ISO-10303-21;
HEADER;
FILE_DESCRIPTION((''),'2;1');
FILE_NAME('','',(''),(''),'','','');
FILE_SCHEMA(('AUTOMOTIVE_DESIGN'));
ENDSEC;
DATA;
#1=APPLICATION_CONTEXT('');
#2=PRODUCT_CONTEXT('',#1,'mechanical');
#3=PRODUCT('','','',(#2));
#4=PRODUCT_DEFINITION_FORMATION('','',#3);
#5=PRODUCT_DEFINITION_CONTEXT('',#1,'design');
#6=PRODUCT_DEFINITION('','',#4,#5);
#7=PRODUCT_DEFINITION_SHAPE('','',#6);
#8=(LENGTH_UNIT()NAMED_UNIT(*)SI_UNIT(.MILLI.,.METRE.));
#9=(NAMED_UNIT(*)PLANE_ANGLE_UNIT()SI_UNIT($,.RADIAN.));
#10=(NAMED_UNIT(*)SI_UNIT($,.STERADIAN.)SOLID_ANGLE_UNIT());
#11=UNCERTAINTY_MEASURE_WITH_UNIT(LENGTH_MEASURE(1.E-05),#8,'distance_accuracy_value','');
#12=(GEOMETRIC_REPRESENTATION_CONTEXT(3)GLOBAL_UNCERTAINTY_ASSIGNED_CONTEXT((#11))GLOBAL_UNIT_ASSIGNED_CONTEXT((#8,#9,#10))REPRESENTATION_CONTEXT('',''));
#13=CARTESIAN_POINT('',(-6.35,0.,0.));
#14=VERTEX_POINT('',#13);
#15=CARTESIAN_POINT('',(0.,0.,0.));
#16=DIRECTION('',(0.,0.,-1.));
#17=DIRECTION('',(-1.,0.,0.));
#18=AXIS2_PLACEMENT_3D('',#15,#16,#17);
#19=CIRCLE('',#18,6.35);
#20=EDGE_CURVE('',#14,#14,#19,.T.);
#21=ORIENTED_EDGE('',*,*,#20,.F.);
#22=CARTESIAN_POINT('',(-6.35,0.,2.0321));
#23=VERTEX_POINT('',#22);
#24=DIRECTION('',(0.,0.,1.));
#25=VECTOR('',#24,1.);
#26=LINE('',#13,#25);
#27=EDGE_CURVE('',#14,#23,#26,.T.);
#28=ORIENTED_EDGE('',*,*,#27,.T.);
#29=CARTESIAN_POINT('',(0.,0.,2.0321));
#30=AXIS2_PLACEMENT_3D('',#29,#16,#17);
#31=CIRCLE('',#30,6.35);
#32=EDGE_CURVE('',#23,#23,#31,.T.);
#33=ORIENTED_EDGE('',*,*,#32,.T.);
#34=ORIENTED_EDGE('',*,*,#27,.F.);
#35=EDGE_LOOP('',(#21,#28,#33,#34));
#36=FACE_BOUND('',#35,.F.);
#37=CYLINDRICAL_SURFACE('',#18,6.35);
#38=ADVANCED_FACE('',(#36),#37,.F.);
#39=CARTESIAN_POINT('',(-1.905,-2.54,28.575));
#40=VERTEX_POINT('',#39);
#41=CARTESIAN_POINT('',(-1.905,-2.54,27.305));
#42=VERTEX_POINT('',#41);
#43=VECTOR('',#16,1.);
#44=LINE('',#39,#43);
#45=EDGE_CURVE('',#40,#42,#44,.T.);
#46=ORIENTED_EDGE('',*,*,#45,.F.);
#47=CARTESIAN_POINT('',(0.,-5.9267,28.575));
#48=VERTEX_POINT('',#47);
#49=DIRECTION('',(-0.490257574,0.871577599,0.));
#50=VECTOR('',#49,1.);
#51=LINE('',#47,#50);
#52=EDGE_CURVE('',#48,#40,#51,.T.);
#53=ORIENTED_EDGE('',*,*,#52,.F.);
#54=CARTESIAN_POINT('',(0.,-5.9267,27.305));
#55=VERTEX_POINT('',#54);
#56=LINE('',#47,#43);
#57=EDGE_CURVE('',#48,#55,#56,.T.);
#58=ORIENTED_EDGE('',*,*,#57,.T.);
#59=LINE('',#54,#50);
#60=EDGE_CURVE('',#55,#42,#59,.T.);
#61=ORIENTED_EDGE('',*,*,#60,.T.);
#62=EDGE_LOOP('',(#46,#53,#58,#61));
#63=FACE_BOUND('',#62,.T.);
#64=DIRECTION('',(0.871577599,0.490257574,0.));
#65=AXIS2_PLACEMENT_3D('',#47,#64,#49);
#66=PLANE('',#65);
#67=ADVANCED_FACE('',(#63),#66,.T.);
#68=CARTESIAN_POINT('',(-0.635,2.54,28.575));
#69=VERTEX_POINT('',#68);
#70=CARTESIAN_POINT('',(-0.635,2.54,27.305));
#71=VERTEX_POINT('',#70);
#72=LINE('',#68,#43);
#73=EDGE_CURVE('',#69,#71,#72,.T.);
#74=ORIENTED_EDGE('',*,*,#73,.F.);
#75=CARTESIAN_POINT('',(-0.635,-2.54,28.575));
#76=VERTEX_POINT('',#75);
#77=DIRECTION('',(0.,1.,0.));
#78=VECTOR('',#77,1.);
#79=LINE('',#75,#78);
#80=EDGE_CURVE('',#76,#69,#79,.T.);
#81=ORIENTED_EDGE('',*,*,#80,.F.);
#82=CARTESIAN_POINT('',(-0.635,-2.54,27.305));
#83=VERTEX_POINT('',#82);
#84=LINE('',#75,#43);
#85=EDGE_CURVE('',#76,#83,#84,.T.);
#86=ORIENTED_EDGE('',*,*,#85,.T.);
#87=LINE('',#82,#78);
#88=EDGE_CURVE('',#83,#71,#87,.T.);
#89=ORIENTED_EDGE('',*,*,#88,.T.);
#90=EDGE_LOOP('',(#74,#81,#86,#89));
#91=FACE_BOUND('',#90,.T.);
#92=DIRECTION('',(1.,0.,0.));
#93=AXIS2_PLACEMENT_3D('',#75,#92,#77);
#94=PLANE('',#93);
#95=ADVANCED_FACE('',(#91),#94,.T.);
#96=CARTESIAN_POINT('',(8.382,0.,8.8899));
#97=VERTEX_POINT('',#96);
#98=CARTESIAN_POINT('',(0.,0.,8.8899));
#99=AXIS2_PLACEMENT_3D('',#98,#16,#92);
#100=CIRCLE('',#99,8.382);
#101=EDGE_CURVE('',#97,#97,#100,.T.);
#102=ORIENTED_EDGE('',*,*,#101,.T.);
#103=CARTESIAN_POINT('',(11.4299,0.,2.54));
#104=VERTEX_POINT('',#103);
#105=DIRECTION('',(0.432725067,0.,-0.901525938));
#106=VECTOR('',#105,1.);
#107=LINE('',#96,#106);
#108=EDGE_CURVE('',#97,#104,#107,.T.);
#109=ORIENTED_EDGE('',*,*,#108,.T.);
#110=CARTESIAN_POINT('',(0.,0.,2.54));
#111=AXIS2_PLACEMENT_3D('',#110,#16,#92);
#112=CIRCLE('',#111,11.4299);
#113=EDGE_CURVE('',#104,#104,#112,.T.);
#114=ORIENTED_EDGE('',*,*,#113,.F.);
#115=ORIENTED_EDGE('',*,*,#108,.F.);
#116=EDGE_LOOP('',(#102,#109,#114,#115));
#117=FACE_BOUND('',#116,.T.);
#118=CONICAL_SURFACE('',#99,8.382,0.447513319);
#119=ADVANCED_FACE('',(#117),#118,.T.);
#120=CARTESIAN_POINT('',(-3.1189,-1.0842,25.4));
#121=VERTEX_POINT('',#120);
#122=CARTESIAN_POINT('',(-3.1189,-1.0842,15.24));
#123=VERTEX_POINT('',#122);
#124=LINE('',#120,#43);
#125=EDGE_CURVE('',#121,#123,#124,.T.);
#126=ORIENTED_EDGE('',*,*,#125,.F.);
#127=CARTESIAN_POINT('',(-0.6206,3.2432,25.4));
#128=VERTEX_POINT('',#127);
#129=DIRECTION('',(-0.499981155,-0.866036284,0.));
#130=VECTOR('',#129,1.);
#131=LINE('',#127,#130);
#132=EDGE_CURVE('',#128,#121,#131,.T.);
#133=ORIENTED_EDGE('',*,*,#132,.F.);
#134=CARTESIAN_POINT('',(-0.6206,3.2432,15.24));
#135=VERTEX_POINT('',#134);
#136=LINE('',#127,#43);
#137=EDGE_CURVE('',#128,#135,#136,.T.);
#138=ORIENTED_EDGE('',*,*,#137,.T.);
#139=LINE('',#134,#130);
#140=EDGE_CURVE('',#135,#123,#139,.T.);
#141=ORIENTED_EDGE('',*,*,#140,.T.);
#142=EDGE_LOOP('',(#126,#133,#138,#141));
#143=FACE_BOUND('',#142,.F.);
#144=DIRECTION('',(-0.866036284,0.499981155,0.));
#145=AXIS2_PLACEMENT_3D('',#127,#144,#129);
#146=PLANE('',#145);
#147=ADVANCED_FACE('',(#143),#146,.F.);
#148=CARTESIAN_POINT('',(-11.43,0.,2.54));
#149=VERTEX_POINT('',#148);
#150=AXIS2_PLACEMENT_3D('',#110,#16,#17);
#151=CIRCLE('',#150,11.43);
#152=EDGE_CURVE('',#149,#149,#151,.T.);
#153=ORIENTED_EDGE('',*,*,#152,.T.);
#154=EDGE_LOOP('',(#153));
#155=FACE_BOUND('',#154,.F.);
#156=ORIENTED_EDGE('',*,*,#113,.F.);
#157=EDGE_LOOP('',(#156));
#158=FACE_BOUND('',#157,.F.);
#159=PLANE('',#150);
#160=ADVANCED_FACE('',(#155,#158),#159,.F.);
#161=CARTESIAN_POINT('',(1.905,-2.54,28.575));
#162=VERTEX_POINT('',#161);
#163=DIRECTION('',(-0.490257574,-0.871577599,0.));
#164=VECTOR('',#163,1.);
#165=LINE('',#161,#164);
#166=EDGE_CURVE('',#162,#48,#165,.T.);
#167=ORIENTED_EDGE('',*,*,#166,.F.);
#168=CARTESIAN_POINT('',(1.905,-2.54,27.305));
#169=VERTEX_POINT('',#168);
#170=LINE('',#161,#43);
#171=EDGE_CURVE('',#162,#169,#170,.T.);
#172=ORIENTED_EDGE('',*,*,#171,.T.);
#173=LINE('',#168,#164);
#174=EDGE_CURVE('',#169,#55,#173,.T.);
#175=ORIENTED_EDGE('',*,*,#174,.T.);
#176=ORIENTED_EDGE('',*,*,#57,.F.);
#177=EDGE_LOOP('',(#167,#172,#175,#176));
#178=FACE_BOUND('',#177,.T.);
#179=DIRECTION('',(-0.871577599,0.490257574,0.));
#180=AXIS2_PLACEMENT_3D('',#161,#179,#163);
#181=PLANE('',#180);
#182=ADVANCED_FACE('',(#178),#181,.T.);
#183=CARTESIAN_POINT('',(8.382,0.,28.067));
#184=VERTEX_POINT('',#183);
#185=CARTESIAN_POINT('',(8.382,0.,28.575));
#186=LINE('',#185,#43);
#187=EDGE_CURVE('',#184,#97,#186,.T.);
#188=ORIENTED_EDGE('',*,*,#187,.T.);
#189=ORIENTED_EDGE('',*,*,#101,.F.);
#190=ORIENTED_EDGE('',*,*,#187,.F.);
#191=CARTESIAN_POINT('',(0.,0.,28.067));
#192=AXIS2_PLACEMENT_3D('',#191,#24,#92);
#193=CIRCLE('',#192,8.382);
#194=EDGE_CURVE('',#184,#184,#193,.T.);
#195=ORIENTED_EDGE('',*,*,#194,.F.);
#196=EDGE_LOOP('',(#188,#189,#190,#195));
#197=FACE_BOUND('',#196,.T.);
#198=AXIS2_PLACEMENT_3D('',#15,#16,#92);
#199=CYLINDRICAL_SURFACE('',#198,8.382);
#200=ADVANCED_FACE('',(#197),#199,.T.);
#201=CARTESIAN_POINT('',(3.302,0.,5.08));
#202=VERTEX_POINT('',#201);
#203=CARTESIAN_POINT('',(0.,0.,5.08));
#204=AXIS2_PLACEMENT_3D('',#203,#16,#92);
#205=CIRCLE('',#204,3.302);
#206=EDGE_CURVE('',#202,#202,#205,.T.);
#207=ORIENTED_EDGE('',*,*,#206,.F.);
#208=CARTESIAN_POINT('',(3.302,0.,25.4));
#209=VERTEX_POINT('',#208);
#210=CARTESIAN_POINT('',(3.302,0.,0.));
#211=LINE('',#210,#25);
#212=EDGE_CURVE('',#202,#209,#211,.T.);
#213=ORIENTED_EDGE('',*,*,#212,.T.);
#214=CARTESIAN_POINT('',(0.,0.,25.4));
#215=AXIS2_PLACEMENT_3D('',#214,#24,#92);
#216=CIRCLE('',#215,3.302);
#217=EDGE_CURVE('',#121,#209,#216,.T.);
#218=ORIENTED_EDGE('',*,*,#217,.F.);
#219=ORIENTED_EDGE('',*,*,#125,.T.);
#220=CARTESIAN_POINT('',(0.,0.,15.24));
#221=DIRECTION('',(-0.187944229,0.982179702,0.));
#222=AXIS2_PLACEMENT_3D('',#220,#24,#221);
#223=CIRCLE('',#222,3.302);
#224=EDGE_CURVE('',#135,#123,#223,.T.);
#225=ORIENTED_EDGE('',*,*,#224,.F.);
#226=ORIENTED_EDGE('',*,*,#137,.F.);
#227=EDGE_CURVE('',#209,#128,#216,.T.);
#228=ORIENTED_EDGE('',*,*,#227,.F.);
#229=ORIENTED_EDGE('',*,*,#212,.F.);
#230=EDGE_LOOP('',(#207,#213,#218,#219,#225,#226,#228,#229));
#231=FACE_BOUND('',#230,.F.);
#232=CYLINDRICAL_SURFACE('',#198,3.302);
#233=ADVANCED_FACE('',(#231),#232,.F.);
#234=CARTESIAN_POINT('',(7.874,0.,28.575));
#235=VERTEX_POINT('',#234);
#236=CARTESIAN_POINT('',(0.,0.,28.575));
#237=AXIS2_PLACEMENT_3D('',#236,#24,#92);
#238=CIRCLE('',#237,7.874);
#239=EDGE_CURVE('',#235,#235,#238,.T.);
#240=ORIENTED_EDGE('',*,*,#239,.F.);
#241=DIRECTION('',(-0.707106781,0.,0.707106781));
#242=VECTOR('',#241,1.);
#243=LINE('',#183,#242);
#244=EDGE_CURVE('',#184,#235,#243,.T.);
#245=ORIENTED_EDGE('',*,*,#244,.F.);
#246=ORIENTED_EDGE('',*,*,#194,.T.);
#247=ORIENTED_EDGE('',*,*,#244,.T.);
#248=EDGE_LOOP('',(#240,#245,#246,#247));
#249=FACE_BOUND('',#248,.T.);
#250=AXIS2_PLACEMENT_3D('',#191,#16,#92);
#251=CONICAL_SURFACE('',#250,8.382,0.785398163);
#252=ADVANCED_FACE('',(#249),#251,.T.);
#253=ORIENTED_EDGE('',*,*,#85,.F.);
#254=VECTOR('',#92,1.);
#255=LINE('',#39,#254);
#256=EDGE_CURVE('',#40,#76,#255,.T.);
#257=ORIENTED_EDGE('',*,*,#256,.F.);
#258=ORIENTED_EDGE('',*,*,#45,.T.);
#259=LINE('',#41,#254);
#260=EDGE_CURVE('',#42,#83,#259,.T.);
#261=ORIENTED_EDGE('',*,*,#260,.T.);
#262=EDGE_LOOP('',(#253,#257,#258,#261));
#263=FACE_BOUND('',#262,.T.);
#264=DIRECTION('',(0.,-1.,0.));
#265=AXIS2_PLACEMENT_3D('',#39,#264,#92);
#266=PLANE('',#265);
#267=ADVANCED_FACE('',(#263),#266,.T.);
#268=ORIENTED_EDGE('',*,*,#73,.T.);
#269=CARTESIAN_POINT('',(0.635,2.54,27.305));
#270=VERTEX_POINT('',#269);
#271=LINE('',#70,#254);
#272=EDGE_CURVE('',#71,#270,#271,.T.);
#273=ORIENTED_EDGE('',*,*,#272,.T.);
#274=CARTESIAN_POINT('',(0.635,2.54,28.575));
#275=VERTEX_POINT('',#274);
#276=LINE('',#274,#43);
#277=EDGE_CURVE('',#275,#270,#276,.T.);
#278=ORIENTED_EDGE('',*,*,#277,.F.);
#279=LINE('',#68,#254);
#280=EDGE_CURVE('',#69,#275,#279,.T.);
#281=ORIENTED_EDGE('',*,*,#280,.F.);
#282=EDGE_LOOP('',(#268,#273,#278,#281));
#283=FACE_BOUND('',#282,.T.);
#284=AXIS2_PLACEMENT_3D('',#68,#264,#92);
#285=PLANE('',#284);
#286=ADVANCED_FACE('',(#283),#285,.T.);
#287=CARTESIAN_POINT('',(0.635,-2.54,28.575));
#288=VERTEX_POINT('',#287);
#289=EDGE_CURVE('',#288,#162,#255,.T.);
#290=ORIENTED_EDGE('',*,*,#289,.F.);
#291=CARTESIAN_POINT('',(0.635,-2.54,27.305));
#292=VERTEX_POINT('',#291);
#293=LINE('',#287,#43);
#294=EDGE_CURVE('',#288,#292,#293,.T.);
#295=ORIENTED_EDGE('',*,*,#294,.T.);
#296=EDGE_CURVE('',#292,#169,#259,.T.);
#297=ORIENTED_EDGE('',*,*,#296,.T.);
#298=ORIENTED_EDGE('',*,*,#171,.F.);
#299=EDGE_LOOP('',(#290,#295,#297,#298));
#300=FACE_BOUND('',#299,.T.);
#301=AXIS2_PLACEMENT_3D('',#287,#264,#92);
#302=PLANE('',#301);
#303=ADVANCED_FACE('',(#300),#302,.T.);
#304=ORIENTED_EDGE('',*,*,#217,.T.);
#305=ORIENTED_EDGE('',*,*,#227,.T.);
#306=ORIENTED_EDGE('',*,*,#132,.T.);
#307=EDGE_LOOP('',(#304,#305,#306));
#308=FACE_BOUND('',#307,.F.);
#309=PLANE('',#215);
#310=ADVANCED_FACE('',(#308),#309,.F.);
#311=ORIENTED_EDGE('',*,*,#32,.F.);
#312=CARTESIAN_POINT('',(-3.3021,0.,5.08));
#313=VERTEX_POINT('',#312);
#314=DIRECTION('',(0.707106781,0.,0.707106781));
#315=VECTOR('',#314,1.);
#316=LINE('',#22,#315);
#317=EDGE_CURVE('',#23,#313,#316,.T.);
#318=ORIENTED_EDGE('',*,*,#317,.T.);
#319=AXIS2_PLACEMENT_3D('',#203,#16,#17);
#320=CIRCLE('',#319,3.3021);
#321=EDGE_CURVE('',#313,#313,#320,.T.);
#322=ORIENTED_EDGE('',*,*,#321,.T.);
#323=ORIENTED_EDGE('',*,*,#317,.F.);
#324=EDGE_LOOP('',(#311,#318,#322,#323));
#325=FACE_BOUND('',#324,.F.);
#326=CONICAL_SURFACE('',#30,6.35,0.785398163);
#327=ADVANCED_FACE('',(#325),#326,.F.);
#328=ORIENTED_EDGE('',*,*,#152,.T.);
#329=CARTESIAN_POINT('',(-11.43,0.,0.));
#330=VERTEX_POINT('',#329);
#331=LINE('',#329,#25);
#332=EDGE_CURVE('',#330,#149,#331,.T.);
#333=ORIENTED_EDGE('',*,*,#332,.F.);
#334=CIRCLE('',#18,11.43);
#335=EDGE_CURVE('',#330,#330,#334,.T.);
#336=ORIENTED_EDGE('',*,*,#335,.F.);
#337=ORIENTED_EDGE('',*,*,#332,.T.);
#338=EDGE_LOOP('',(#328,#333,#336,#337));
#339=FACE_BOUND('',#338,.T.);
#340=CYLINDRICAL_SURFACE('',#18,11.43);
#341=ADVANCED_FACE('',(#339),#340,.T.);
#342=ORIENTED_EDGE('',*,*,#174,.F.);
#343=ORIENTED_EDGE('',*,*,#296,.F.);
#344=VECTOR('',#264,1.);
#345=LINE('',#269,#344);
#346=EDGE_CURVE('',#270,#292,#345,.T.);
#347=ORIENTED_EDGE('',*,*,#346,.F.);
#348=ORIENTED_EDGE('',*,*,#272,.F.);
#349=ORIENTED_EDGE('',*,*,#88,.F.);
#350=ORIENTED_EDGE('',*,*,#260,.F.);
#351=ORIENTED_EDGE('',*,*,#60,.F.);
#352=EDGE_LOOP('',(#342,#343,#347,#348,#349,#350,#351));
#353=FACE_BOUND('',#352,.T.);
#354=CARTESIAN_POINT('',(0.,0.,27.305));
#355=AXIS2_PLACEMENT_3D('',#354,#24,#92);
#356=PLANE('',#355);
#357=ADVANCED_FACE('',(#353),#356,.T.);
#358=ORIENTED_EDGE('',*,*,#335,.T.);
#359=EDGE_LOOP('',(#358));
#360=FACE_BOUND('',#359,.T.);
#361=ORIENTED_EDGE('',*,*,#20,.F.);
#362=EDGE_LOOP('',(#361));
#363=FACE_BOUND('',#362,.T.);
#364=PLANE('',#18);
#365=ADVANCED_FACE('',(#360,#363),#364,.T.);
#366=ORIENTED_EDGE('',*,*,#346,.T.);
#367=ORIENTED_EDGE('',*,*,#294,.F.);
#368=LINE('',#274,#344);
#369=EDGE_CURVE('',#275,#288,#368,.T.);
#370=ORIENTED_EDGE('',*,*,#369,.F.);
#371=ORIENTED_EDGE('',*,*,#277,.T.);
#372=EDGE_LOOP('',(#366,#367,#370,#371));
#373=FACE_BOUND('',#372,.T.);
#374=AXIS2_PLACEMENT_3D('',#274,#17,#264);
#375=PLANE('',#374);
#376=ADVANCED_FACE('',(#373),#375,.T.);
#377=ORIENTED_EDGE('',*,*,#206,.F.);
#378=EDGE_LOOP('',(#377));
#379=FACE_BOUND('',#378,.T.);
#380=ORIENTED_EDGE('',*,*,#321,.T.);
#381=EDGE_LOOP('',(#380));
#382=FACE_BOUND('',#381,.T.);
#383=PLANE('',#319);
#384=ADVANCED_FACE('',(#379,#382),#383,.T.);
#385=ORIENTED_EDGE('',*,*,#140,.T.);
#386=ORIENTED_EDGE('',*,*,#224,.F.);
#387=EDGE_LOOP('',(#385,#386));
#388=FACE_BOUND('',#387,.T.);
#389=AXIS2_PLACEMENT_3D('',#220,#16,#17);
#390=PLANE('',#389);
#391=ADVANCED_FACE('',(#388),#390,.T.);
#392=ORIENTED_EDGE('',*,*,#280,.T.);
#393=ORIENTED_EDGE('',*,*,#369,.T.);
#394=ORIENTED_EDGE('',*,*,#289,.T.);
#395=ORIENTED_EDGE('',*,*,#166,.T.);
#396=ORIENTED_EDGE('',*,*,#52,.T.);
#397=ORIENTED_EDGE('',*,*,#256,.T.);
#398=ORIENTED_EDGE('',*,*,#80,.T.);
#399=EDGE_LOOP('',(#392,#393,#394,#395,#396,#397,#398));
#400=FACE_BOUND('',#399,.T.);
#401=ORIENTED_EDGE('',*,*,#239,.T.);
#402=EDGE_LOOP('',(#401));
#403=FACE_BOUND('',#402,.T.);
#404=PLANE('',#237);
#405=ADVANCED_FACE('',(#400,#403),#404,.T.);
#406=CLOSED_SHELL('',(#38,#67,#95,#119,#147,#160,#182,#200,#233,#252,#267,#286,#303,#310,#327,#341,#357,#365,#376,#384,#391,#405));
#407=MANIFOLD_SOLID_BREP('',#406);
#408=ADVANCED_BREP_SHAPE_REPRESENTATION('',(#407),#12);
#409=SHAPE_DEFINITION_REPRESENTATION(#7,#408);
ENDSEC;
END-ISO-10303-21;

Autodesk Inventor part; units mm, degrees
ref_plane "YZ Plane" through (0, 0, 0) normal (1, 0, 0) x (0, 1, 0)
ref_plane "XZ Plane" through (0, 0, 0) normal (0, 1, 0) x (-1, 0, 0)
ref_plane "XY Plane" through (0, 0, 0) normal (0, 0, 1) x (1, 0, 0)
sketch "Sketch1" plane through (0, 0, 0) normal (0, 0, 1) x (1, 0, 0)
  circle A0 centre (0, 0) radius 2.9845
  circle A1 centre (0, 0) radius 8.382
  circle A2 centre (0, 0) radius 3.302
  dimension "d0" = 5.969
  dimension "d2" = 0.3175
  dimension "d5" = 5.08
extrude "Extrusion1" add sketch "Sketch1" along normal blind 25.4 contours A1
sketch "Sketch2" plane through (0, 0, 25.4) normal (0, 0, 1) x (1, 0, 0)
  circle A0 centre (0, 0) radius 8.382 projected
extrude "Extrusion2" add sketch "Sketch2" along normal blind 3.175
sketch "Sketch3" plane through (0, 0, 28.575) normal (0, 0, 1) x (1, 0, 0)
  line L0 (0.635, -2.54) -> (-0.635, -2.54)
  line L1 (-0.635, -2.54) -> (-0.635, 2.54)
  line L2 (-0.635, 2.54) -> (0.635, 2.54)
  line L3 (0.635, 2.54) -> (0.635, -2.54)
  line L4 (0.635, -2.54) -> (-0.635, 2.54) construction
  line L5 (-0.635, -2.54) -> (0.635, 2.54) construction
  line L6 (0, 2.54) -> (0, -2.54) construction
  line L7 (-1.905, -2.54) -> (1.905, -2.54)
  line L8 (1.905, -2.54) -> (0, -5.9267)
  line L9 (0, -5.9267) -> (-1.905, -2.54)
  point P0 (0, 0)
  dimension "d8" = 5.08
  dimension "d10" = 1.27
  dimension "d11" = 3.81
  dimension "d45" = 3.3867
extrude "Extrusion3" cut sketch "Sketch3" against normal blind 1.27
chamfer "Chamfer1" distance 0.508 angle 45 1 edges at (-8.382, 0, 28.575)
sketch "Sketch6" plane through (0, 0, 25.4) normal (0, 0, -1) x (-1, 0, 0)
  circle A0 centre (0, 0) radius 3.302 projected
  line L0 (0.6206, 3.2432) -> (3.1189, -1.0842)
  line L1 (3.1189, 1.0842) -> (0.6206, -3.2432) construction
  line L2 (0, 0) -> (3.302, 0) construction
  circle A1 centre (0, 0) radius 3.302 construction
  line L3 (0, 0) -> (2.8596, -1.651) construction
  line L4 (0, 0) -> (2.8596, 1.651) construction
  line L5 (-1.3144, 4.3273) -> (-3.8128, 0) construction
  arc A2 (0.6206, -3.2432) -> (3.1189, 1.0842) centre (0, 0) ccw
  arc A3 (3.1189, -1.0842) -> (0.6206, 3.2432) centre (0, 0) ccw
  circle A4 centre (0, 0) radius 3.302 projected
  dimension "d24" = 60
  dimension "d26" = 5.461
extrude "Extrusion6" add sketch "Sketch6" along normal blind 10.16 contours A0 L0 picked at (2.0493, 1.4727)
sketch "Sketch10" plane through (0, 0, 0) normal (0, 0, -1) x (-1, 0, 0)
  circle A0 centre (0, 0) radius 6.35
  circle A1 centre (0, 0) radius 11.43
  circle A2 centre (0, 0) radius 3.302 construction
  circle A3 centre (0, 0) radius 8.382 construction
  dimension "d49" = 12.7
  dimension "d50" = 5.08
  dimension "d51" = 5.08
extrude "Extrusion10" add sketch "Sketch10" against normal blind 2.54
chamfer "Chamfer3" distance 6.35 distance2 3.048 1 edges at (-8.382, 0, 2.54) measured on face at (8.2735, 1.3446, 11.049)
sketch "Sketch11" plane through (0, 0, 0) normal (0, 0, -1) x (-1, 0, 0)
  circle A0 centre (0, 0) radius 6.35
  dimension "d57" = 12.7
extrude "Extrusion11" cut sketch "Sketch11" against normal blind 5.08
chamfer "Chamfer4" distance 3.048 angle 45 1 edges at (6.35, 0, 5.08)
equation "\"d11\" = 3 * d10"
equation "\"d45\" = 0.666667 * d8"
equation "\"d51\" = d50"
properties part number "potcap"
